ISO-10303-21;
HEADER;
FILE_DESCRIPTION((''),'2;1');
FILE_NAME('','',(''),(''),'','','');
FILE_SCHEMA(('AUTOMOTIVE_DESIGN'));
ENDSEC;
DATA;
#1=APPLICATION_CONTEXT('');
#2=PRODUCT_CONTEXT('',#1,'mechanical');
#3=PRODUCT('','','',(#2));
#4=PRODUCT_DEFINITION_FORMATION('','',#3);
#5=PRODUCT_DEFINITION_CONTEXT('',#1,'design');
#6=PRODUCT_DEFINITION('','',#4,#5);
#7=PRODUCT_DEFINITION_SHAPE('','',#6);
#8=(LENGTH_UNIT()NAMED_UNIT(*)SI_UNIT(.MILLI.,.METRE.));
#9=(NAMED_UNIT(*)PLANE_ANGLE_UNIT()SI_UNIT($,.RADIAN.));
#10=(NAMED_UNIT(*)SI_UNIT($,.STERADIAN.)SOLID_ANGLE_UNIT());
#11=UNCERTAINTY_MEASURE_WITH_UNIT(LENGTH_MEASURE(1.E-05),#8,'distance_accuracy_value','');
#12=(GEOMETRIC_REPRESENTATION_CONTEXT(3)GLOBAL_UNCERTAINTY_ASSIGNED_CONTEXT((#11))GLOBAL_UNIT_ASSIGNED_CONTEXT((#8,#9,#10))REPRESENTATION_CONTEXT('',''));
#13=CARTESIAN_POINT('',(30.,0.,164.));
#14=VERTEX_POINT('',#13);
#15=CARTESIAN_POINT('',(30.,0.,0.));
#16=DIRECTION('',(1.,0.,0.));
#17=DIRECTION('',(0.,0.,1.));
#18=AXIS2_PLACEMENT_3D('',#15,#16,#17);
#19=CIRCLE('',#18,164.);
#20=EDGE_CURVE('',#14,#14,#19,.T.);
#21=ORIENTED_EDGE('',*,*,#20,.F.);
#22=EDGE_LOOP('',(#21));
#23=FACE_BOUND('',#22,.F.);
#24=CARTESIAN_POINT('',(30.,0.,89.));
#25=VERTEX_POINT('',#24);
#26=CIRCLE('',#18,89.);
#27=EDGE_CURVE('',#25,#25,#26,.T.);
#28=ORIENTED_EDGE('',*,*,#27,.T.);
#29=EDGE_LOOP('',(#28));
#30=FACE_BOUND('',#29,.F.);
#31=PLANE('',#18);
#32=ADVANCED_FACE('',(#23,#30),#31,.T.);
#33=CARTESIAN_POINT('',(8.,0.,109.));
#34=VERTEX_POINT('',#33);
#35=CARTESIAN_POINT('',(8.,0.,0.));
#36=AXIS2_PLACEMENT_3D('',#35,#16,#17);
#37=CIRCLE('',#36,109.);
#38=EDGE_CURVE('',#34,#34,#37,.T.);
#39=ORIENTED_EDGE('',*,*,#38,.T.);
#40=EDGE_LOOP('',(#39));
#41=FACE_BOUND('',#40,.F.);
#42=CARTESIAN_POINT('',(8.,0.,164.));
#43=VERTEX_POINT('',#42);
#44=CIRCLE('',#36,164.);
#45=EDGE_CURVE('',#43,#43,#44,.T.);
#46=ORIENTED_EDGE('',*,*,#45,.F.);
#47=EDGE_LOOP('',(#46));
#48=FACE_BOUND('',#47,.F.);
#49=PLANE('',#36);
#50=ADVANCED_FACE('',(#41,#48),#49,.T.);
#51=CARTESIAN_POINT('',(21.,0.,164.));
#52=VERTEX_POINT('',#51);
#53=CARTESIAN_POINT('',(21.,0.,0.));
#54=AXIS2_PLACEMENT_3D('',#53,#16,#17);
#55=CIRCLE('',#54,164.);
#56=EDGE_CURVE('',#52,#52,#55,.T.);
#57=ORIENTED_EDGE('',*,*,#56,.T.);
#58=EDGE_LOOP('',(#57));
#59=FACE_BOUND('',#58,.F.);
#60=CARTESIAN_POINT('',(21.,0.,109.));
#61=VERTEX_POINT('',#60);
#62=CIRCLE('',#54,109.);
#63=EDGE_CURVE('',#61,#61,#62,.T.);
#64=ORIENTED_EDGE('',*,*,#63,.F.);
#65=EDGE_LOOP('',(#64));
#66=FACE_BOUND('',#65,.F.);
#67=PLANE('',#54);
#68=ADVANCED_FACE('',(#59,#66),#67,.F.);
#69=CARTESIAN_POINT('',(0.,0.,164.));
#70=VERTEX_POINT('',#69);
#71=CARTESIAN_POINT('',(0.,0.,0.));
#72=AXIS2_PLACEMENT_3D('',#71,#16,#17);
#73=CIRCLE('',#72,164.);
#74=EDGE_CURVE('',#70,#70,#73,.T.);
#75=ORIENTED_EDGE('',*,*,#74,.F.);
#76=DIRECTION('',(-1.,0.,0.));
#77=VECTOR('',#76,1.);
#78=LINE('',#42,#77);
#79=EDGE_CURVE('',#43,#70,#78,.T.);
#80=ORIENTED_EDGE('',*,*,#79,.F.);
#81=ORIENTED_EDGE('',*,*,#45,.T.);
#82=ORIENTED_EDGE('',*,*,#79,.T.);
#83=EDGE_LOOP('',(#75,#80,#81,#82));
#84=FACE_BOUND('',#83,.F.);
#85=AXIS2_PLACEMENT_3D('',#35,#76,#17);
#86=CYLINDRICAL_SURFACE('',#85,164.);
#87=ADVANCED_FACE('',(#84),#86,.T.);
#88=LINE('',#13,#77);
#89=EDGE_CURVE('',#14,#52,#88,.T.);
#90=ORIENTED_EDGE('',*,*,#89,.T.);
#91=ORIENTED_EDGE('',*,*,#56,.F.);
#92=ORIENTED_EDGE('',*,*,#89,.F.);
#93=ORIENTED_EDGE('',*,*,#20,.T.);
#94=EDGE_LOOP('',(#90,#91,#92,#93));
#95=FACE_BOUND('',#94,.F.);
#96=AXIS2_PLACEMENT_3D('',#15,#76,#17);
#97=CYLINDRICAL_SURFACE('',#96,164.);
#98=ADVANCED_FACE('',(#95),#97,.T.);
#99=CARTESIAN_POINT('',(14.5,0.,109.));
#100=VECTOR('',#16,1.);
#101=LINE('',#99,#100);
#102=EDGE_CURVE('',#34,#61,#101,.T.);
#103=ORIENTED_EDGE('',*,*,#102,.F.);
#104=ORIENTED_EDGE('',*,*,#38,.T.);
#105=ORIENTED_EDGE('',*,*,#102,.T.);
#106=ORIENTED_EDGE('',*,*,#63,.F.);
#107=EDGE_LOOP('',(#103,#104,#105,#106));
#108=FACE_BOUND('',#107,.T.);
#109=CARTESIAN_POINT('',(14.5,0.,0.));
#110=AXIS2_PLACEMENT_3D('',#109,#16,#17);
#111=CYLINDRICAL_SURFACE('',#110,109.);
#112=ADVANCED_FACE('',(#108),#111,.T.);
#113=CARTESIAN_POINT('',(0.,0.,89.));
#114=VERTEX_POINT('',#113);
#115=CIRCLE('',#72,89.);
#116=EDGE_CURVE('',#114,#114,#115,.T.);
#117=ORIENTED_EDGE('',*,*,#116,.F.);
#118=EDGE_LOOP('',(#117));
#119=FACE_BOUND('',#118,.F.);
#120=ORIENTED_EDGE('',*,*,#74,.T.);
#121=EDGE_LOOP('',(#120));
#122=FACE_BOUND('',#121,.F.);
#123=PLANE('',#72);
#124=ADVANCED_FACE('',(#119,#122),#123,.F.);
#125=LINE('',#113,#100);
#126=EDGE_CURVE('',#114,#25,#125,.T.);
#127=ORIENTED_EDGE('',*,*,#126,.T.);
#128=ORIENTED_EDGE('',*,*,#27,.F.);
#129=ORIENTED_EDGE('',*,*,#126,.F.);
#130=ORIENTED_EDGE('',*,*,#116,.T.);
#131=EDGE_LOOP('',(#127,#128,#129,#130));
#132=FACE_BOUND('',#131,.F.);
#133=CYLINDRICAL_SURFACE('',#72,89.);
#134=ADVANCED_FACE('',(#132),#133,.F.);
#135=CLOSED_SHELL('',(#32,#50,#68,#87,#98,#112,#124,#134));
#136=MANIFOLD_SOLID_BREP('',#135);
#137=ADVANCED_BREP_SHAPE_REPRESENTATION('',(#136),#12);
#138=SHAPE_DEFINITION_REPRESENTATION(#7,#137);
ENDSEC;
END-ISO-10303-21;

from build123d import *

# Parameters (mm, degrees)
F0_W   = 8
F0_H   = 8.5
F0_W_2 = 13
F0_H_2 = 11.5
F0_W_3 = 9


with BuildPart() as f1:
    # F0 (on Front) → F1 (revolve)
    with BuildSketch(Plane.XZ):
        Polygon((0, 164), (0, 97.5), (8, 97.5), (8, 109), (8, 164), align=None)
        with Locations((4, 93.25)):
            Rectangle(F0_W, F0_H)
        Polygon((21, 109), (21, 97.5), (30, 97.5), (30, 164), (21, 164), align=None)
        with Locations((14.5, 103.25)):
            Rectangle(F0_W_2, F0_H_2)
        with Locations((14.5, 93.25)):
            Rectangle(F0_W_2, F0_H)
        with Locations((25.5, 93.25)):
            Rectangle(F0_W_3, F0_H)
    revolve(axis=Axis((49, 0, 0), (1, 0, 0)))


solid = f1.part
